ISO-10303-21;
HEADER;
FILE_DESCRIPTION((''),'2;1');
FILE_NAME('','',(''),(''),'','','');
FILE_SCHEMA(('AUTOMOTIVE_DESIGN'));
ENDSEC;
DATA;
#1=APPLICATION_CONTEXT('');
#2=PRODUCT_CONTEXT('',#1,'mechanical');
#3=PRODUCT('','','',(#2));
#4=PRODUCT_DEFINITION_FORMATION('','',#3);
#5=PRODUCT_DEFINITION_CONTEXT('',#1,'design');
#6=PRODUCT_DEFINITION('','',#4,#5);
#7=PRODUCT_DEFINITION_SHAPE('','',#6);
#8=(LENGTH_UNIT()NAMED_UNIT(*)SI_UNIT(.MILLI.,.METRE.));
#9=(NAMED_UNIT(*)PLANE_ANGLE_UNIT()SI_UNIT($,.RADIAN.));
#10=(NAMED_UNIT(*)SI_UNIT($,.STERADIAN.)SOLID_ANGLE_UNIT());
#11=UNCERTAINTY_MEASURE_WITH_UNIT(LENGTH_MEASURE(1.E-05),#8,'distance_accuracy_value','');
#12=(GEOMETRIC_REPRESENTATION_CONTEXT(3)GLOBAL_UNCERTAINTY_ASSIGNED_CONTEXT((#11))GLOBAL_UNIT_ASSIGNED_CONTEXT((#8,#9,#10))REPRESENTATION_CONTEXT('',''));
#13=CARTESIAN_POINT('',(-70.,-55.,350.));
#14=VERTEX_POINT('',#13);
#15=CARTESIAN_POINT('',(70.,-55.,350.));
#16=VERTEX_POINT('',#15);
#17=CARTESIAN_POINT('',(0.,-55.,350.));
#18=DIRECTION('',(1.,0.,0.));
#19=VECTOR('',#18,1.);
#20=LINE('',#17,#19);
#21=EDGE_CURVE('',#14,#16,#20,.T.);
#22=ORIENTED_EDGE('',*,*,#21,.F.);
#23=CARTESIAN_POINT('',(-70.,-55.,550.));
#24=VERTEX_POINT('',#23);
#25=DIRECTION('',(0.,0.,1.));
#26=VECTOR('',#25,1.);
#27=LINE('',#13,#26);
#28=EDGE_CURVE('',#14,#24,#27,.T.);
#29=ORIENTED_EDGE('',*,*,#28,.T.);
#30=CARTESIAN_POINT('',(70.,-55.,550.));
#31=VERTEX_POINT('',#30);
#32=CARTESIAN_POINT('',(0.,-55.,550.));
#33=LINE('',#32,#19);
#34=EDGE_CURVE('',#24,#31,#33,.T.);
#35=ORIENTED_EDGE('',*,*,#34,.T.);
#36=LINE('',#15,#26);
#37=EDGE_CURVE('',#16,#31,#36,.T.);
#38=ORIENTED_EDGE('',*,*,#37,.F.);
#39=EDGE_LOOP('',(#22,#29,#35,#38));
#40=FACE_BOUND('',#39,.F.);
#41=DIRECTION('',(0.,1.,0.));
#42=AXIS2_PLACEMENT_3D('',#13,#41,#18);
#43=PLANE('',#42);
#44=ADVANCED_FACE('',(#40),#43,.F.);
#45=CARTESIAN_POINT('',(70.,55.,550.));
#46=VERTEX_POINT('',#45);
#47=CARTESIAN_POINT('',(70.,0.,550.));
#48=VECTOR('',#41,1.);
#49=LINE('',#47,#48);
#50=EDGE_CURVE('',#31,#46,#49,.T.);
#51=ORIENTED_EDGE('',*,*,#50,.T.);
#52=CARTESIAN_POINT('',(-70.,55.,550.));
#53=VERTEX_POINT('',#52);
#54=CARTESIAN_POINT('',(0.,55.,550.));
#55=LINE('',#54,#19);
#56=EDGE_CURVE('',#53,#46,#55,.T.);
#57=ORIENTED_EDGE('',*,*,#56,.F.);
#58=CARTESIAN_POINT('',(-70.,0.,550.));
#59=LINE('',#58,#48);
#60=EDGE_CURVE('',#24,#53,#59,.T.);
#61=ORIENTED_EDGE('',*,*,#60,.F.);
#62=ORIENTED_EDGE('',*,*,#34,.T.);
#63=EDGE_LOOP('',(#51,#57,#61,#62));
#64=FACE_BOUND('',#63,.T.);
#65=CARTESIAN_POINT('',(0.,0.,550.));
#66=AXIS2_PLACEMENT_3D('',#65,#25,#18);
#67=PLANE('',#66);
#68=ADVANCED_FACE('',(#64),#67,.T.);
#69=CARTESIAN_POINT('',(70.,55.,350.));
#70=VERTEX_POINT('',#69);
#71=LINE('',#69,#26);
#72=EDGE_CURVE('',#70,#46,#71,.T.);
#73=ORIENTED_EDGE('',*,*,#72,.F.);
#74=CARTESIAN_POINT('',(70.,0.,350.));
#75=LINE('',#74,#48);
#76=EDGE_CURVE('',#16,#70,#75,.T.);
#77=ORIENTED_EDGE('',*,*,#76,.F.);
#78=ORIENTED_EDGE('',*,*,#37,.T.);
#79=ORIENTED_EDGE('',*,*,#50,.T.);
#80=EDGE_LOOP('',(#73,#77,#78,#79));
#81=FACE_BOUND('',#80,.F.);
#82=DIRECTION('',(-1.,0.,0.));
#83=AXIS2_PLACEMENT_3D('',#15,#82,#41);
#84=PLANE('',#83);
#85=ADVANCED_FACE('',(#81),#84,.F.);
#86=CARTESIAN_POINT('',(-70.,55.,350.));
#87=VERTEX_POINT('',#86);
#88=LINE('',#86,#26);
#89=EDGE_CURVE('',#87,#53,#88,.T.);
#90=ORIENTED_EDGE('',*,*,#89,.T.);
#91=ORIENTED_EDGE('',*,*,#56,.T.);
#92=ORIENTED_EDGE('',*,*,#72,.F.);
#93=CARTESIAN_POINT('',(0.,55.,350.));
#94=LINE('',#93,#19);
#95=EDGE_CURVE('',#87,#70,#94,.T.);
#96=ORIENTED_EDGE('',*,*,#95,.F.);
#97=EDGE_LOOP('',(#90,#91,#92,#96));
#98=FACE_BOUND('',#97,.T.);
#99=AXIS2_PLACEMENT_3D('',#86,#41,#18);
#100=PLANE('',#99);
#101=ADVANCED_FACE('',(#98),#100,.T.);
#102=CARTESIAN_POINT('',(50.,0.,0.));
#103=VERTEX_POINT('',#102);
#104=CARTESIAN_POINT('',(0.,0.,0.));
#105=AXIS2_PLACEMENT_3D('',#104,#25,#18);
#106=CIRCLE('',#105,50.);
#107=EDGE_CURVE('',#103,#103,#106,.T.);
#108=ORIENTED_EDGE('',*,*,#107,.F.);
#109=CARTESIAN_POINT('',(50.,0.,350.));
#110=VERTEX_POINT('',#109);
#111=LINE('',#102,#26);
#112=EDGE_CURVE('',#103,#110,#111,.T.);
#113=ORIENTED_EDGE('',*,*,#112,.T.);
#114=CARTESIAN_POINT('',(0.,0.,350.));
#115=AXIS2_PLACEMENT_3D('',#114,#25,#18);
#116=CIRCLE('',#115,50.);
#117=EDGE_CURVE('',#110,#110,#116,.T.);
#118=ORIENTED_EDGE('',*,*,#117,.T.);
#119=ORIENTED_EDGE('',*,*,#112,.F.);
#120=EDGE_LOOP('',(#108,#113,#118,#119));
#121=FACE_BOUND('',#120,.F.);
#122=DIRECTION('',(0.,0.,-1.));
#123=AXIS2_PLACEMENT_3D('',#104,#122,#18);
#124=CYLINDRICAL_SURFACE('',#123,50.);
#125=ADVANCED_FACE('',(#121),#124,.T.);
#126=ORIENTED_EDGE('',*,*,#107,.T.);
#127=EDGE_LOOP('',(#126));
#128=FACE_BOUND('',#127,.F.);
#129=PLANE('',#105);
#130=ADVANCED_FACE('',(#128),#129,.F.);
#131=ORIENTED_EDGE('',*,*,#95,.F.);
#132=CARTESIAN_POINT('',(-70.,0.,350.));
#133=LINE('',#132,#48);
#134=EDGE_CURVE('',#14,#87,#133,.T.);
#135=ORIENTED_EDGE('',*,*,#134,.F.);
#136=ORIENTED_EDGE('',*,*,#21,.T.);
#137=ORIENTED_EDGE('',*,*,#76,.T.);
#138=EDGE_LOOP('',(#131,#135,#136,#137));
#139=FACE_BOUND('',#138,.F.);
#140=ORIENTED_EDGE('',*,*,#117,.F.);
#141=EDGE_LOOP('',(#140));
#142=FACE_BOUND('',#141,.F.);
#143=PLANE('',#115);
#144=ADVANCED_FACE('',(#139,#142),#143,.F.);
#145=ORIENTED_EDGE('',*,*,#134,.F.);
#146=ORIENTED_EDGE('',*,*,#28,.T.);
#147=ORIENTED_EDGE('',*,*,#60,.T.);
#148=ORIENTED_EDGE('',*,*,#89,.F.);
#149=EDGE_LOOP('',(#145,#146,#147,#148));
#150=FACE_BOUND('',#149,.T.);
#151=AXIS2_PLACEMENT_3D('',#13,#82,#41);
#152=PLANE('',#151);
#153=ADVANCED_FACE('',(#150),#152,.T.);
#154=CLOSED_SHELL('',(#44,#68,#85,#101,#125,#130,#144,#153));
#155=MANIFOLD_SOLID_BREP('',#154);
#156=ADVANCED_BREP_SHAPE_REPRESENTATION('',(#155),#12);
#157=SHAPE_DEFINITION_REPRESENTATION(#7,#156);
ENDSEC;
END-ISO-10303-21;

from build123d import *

# Parameters (mm, degrees)
F0_R     = 50
F1_DEPTH = 350
F2_W     = 140
F2_H     = 110
F2_R     = 50
F3_DEPTH = 200


# Not quite as in the source:
# - a feature names something its author has since deleted; it is built from what else it names


with BuildPart() as f1:
    # F0 (on Top) → F1 (new body)
    with BuildSketch(Plane.XY):
        Circle(F0_R)
    extrude(amount=F1_DEPTH)

    # F2 (on face) → F3 (join)
    with BuildSketch(Plane.XY.offset(350)):
        Rectangle(F2_W, F2_H)
        Circle(F2_R, mode=Mode.SUBTRACT)
        Circle(F2_R)
    extrude(amount=F3_DEPTH)


solid = f1.part
